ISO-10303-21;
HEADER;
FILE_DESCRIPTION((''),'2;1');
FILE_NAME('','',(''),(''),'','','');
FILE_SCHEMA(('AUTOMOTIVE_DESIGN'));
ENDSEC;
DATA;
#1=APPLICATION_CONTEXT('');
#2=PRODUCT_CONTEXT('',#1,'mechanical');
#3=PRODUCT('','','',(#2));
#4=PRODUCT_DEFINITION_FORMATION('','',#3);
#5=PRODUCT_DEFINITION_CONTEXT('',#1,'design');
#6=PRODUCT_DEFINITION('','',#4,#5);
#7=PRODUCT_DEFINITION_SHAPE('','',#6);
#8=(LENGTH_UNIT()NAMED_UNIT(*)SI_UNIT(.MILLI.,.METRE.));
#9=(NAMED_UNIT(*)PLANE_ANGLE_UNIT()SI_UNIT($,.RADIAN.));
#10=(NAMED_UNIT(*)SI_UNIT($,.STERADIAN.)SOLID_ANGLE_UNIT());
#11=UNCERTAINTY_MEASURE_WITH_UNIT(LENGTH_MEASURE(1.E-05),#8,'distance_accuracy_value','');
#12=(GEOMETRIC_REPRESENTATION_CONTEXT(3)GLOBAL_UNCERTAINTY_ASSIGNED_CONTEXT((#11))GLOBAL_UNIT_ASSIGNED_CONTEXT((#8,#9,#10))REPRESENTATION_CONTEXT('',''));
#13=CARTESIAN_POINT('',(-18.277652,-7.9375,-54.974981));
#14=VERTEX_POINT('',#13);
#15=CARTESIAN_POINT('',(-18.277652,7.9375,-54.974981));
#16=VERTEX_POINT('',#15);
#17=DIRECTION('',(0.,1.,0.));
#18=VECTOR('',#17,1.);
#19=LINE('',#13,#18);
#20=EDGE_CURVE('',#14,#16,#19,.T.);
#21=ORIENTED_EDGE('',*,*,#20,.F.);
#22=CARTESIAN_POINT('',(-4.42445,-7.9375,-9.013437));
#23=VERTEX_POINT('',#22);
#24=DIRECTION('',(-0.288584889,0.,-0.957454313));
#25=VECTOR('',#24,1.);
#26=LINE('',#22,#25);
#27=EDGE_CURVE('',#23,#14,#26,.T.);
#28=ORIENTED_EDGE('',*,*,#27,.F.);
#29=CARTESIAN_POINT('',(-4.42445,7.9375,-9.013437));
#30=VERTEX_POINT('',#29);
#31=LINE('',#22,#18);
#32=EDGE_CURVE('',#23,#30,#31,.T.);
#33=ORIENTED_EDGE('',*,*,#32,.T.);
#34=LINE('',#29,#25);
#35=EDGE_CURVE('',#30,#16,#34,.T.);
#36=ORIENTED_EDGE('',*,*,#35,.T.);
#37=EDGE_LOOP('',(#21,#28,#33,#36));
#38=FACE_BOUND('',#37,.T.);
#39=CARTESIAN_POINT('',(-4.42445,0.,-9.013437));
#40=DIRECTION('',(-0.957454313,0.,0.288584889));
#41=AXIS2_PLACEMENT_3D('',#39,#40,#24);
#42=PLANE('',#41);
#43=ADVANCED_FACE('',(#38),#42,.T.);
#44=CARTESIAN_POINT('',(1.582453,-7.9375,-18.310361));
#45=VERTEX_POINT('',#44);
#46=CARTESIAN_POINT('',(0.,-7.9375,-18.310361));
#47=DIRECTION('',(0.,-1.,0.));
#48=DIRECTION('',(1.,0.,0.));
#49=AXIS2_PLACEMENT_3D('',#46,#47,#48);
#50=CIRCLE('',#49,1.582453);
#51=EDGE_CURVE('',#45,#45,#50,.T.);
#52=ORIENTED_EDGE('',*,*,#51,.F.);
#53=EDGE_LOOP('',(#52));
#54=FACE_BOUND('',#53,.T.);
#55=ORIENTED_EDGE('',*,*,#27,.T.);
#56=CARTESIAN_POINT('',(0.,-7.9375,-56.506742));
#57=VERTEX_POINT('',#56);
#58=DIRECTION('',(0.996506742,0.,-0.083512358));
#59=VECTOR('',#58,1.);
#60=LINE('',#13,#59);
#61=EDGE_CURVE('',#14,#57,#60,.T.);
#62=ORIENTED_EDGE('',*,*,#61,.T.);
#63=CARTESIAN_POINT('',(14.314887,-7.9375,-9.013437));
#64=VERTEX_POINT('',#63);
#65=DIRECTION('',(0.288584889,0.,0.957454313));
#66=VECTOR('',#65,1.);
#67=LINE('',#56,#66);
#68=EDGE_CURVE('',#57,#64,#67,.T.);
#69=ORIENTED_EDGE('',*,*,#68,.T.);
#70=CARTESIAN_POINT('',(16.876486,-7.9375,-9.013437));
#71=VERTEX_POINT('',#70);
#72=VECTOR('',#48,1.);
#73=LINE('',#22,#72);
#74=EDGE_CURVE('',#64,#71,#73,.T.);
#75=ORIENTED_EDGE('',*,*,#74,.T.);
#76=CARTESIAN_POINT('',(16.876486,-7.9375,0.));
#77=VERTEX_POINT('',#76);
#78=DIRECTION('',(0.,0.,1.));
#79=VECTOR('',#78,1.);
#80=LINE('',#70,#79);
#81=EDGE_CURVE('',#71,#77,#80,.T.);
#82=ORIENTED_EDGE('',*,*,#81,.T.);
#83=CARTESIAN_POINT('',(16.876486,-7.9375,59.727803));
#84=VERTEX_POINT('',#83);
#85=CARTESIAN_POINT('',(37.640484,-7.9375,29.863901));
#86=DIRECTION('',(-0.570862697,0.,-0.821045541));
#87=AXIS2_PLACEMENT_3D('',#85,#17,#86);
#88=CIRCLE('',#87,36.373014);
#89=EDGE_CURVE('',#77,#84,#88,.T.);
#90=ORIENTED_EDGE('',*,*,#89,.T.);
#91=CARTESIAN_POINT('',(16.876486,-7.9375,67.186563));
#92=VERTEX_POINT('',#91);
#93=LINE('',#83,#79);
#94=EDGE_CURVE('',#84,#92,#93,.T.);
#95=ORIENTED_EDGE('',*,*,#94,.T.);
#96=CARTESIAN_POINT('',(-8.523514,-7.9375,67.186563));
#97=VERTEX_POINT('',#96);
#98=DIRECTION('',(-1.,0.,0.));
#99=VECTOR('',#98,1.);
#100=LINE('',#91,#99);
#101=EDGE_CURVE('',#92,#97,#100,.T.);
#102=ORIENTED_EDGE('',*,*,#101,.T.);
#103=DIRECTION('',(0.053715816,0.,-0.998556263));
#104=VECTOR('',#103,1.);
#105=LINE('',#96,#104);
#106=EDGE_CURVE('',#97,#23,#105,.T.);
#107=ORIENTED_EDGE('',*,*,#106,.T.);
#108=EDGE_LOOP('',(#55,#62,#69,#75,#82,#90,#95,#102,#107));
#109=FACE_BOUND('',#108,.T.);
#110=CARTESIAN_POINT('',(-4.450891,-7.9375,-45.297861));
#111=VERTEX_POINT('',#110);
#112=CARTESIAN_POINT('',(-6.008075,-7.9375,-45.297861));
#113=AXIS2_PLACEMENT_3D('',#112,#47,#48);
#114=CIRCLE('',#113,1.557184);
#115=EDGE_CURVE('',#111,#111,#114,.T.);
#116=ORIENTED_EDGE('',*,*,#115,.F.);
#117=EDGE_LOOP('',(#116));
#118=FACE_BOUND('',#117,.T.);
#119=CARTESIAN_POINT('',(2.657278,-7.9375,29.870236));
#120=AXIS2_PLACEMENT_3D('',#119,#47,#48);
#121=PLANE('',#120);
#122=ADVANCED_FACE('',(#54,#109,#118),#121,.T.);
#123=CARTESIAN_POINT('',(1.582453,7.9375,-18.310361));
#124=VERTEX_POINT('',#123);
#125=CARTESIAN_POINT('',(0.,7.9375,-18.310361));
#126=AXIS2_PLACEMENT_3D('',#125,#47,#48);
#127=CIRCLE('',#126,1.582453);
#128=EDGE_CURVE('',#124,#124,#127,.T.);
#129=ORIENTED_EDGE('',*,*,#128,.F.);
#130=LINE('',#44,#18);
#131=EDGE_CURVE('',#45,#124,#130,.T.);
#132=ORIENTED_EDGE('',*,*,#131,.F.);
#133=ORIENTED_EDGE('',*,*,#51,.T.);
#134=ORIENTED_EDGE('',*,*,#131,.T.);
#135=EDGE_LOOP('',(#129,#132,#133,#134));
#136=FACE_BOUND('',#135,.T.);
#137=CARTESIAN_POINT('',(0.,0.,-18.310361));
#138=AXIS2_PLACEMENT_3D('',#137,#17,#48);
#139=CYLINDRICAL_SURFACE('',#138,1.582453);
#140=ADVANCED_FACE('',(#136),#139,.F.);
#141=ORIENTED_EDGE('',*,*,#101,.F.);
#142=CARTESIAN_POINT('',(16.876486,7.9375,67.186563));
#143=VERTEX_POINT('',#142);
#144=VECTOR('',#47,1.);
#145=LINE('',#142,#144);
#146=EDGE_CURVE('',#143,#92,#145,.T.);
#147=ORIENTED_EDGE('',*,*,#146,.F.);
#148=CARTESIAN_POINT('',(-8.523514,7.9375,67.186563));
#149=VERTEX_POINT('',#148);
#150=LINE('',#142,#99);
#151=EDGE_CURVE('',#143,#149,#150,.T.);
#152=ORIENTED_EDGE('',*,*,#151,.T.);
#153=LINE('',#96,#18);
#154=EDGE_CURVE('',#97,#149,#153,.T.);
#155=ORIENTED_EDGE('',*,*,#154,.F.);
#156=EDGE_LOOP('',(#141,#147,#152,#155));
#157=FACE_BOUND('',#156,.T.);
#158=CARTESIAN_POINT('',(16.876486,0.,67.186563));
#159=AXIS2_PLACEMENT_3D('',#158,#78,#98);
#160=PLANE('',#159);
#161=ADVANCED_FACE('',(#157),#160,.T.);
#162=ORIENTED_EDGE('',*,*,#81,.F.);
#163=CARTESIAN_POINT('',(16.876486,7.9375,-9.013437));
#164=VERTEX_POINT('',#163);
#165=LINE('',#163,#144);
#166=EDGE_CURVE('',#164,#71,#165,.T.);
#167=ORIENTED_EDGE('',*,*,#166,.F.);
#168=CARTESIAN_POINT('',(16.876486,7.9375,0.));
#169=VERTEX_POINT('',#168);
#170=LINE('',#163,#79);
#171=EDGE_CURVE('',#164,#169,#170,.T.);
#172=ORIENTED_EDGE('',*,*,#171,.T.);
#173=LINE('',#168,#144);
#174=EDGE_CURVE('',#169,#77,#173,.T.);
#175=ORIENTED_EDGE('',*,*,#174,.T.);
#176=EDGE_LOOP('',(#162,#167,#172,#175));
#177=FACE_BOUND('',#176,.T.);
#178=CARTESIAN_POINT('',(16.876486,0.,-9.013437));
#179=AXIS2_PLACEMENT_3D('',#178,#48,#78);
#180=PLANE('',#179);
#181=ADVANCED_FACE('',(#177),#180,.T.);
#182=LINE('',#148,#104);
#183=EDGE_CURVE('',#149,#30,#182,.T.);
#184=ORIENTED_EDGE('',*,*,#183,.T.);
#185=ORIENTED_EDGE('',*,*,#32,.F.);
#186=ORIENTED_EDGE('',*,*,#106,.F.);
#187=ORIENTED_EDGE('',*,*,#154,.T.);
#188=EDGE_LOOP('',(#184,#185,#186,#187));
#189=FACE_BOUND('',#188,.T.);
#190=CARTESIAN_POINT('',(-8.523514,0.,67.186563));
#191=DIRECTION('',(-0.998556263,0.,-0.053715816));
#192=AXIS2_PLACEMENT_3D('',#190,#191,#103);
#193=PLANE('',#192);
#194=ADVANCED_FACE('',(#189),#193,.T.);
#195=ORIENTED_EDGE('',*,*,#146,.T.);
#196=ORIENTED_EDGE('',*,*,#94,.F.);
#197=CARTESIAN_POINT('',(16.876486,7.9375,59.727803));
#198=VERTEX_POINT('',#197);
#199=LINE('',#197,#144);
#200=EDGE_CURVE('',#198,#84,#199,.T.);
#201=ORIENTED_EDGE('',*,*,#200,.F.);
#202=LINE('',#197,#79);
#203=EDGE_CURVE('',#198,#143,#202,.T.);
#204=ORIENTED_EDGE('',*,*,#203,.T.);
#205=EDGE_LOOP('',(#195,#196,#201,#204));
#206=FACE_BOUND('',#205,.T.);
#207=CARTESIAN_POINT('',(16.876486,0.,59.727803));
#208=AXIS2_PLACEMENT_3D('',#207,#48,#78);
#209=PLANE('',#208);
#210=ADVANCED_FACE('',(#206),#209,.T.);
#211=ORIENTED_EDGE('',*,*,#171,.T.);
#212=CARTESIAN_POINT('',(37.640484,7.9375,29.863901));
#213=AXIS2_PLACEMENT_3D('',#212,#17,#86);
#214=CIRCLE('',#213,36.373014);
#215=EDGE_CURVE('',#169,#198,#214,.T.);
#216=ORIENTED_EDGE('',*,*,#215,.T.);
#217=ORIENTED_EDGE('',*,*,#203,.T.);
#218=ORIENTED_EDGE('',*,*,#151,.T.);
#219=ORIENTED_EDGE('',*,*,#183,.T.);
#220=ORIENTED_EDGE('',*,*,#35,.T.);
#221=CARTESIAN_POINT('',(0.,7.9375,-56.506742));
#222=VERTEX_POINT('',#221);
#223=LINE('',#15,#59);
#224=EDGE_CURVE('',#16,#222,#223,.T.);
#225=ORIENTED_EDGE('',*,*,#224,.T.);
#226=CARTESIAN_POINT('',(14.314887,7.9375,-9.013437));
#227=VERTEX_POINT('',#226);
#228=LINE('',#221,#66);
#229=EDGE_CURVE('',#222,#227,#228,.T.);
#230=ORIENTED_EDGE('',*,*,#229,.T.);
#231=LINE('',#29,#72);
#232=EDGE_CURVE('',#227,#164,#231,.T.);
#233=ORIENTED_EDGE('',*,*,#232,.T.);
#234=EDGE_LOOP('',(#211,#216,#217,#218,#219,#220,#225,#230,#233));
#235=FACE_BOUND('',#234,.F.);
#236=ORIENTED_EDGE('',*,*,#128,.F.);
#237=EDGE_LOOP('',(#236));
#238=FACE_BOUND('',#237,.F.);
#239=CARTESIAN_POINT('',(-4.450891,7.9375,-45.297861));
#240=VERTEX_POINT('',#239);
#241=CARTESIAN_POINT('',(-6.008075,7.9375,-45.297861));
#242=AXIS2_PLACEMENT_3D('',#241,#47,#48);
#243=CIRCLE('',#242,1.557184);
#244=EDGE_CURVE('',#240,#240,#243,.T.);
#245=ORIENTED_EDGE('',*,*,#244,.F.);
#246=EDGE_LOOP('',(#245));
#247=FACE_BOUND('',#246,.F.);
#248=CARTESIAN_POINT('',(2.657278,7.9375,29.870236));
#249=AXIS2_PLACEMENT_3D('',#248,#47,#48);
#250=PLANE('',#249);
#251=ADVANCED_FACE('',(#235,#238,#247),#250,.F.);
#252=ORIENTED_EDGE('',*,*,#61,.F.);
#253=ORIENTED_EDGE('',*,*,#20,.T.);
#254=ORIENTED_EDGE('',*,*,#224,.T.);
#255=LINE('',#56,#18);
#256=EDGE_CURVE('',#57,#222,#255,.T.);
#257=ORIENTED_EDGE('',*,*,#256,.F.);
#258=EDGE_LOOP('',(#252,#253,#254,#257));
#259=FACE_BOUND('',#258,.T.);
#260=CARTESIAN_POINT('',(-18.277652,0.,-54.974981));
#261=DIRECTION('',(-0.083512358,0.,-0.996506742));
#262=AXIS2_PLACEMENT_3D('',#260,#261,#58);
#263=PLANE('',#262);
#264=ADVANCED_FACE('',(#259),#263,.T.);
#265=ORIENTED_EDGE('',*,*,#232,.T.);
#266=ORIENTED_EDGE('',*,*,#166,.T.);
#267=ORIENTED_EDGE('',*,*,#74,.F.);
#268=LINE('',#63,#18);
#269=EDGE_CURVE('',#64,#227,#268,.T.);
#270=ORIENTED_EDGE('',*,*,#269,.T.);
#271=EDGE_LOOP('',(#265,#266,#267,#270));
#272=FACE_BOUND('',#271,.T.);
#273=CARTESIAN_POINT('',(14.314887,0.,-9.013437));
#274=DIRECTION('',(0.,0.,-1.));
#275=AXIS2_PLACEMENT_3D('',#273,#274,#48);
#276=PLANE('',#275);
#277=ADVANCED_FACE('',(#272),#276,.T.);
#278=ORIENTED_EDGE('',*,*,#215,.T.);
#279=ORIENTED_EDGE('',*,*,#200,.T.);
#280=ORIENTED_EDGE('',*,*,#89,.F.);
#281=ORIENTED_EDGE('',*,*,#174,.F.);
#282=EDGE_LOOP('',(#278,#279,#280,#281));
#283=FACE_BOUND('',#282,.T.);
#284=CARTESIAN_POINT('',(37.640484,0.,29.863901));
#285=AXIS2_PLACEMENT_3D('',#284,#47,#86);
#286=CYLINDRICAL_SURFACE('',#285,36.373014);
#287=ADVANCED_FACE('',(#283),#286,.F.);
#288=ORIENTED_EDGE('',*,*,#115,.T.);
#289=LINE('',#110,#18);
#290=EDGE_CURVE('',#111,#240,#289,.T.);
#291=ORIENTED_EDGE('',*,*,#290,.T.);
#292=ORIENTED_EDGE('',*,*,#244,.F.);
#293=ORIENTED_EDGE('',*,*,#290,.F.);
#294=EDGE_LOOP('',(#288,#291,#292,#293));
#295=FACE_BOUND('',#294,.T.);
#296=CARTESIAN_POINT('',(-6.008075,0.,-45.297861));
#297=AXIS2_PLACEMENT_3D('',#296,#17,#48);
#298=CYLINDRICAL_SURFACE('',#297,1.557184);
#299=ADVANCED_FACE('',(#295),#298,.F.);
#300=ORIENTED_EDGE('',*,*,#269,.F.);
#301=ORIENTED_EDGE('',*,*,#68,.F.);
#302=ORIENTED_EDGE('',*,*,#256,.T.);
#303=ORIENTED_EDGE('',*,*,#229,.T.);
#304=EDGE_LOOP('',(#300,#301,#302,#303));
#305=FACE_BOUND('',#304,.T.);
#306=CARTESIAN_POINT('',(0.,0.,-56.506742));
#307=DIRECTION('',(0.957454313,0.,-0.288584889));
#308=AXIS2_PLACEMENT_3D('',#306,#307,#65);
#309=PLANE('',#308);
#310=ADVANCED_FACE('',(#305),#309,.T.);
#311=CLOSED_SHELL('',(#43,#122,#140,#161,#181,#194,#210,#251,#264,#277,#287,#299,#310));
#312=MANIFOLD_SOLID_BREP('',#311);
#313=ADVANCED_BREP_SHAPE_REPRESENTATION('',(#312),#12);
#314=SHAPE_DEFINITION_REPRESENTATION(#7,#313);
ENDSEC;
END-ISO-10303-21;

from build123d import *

# Parameters (mm, degrees)
F0_R     = 1.5571839485
F0_R_2   = 1.582453361
F1_DEPTH = 7.9375


# Not quite as in the source:
# - a feature names something its author has since deleted; it is built from what else it names


with BuildPart() as f1:
    # F0 (on Front) → F1 (new body, symmetric)
    with BuildSketch(Plane.XZ):
        with BuildLine():
            Line((-4.4244504534, -9.0134367347), (14.3148868547, -9.0134367347))
            Line((14.3148868547, -9.0134367347), (16.876486437, -9.0134367347))
            Line((16.876486437, -9.0134367347), (16.876486437, 0))
            ThreePointArc((16.876486437, 0), (1.2674691421, 29.8639013079), (16.876486437, 59.7278026158))
            Line((16.876486437, 59.7278026158), (16.876486437, 67.1865632653))
            Line((16.876486437, 67.1865632653), (-8.523513563, 67.1865632653))
            Line((-8.523513563, 67.1865632653), (-4.4244504534, -9.0134367347))
        make_face()
        Polygon((0, -56.506741792), (14.3148868547, -9.0134367347), (-4.4244504534, -9.0134367347), (-18.2776516019, -54.9749811636), align=None)
        with Locations((-6.0080750845, -45.2978610992)):
            Circle(F0_R, mode=Mode.SUBTRACT)
        with Locations((0, -18.3103610992)):
            Circle(F0_R_2, mode=Mode.SUBTRACT)
    extrude(amount=F1_DEPTH, both=True)


solid = f1.part
